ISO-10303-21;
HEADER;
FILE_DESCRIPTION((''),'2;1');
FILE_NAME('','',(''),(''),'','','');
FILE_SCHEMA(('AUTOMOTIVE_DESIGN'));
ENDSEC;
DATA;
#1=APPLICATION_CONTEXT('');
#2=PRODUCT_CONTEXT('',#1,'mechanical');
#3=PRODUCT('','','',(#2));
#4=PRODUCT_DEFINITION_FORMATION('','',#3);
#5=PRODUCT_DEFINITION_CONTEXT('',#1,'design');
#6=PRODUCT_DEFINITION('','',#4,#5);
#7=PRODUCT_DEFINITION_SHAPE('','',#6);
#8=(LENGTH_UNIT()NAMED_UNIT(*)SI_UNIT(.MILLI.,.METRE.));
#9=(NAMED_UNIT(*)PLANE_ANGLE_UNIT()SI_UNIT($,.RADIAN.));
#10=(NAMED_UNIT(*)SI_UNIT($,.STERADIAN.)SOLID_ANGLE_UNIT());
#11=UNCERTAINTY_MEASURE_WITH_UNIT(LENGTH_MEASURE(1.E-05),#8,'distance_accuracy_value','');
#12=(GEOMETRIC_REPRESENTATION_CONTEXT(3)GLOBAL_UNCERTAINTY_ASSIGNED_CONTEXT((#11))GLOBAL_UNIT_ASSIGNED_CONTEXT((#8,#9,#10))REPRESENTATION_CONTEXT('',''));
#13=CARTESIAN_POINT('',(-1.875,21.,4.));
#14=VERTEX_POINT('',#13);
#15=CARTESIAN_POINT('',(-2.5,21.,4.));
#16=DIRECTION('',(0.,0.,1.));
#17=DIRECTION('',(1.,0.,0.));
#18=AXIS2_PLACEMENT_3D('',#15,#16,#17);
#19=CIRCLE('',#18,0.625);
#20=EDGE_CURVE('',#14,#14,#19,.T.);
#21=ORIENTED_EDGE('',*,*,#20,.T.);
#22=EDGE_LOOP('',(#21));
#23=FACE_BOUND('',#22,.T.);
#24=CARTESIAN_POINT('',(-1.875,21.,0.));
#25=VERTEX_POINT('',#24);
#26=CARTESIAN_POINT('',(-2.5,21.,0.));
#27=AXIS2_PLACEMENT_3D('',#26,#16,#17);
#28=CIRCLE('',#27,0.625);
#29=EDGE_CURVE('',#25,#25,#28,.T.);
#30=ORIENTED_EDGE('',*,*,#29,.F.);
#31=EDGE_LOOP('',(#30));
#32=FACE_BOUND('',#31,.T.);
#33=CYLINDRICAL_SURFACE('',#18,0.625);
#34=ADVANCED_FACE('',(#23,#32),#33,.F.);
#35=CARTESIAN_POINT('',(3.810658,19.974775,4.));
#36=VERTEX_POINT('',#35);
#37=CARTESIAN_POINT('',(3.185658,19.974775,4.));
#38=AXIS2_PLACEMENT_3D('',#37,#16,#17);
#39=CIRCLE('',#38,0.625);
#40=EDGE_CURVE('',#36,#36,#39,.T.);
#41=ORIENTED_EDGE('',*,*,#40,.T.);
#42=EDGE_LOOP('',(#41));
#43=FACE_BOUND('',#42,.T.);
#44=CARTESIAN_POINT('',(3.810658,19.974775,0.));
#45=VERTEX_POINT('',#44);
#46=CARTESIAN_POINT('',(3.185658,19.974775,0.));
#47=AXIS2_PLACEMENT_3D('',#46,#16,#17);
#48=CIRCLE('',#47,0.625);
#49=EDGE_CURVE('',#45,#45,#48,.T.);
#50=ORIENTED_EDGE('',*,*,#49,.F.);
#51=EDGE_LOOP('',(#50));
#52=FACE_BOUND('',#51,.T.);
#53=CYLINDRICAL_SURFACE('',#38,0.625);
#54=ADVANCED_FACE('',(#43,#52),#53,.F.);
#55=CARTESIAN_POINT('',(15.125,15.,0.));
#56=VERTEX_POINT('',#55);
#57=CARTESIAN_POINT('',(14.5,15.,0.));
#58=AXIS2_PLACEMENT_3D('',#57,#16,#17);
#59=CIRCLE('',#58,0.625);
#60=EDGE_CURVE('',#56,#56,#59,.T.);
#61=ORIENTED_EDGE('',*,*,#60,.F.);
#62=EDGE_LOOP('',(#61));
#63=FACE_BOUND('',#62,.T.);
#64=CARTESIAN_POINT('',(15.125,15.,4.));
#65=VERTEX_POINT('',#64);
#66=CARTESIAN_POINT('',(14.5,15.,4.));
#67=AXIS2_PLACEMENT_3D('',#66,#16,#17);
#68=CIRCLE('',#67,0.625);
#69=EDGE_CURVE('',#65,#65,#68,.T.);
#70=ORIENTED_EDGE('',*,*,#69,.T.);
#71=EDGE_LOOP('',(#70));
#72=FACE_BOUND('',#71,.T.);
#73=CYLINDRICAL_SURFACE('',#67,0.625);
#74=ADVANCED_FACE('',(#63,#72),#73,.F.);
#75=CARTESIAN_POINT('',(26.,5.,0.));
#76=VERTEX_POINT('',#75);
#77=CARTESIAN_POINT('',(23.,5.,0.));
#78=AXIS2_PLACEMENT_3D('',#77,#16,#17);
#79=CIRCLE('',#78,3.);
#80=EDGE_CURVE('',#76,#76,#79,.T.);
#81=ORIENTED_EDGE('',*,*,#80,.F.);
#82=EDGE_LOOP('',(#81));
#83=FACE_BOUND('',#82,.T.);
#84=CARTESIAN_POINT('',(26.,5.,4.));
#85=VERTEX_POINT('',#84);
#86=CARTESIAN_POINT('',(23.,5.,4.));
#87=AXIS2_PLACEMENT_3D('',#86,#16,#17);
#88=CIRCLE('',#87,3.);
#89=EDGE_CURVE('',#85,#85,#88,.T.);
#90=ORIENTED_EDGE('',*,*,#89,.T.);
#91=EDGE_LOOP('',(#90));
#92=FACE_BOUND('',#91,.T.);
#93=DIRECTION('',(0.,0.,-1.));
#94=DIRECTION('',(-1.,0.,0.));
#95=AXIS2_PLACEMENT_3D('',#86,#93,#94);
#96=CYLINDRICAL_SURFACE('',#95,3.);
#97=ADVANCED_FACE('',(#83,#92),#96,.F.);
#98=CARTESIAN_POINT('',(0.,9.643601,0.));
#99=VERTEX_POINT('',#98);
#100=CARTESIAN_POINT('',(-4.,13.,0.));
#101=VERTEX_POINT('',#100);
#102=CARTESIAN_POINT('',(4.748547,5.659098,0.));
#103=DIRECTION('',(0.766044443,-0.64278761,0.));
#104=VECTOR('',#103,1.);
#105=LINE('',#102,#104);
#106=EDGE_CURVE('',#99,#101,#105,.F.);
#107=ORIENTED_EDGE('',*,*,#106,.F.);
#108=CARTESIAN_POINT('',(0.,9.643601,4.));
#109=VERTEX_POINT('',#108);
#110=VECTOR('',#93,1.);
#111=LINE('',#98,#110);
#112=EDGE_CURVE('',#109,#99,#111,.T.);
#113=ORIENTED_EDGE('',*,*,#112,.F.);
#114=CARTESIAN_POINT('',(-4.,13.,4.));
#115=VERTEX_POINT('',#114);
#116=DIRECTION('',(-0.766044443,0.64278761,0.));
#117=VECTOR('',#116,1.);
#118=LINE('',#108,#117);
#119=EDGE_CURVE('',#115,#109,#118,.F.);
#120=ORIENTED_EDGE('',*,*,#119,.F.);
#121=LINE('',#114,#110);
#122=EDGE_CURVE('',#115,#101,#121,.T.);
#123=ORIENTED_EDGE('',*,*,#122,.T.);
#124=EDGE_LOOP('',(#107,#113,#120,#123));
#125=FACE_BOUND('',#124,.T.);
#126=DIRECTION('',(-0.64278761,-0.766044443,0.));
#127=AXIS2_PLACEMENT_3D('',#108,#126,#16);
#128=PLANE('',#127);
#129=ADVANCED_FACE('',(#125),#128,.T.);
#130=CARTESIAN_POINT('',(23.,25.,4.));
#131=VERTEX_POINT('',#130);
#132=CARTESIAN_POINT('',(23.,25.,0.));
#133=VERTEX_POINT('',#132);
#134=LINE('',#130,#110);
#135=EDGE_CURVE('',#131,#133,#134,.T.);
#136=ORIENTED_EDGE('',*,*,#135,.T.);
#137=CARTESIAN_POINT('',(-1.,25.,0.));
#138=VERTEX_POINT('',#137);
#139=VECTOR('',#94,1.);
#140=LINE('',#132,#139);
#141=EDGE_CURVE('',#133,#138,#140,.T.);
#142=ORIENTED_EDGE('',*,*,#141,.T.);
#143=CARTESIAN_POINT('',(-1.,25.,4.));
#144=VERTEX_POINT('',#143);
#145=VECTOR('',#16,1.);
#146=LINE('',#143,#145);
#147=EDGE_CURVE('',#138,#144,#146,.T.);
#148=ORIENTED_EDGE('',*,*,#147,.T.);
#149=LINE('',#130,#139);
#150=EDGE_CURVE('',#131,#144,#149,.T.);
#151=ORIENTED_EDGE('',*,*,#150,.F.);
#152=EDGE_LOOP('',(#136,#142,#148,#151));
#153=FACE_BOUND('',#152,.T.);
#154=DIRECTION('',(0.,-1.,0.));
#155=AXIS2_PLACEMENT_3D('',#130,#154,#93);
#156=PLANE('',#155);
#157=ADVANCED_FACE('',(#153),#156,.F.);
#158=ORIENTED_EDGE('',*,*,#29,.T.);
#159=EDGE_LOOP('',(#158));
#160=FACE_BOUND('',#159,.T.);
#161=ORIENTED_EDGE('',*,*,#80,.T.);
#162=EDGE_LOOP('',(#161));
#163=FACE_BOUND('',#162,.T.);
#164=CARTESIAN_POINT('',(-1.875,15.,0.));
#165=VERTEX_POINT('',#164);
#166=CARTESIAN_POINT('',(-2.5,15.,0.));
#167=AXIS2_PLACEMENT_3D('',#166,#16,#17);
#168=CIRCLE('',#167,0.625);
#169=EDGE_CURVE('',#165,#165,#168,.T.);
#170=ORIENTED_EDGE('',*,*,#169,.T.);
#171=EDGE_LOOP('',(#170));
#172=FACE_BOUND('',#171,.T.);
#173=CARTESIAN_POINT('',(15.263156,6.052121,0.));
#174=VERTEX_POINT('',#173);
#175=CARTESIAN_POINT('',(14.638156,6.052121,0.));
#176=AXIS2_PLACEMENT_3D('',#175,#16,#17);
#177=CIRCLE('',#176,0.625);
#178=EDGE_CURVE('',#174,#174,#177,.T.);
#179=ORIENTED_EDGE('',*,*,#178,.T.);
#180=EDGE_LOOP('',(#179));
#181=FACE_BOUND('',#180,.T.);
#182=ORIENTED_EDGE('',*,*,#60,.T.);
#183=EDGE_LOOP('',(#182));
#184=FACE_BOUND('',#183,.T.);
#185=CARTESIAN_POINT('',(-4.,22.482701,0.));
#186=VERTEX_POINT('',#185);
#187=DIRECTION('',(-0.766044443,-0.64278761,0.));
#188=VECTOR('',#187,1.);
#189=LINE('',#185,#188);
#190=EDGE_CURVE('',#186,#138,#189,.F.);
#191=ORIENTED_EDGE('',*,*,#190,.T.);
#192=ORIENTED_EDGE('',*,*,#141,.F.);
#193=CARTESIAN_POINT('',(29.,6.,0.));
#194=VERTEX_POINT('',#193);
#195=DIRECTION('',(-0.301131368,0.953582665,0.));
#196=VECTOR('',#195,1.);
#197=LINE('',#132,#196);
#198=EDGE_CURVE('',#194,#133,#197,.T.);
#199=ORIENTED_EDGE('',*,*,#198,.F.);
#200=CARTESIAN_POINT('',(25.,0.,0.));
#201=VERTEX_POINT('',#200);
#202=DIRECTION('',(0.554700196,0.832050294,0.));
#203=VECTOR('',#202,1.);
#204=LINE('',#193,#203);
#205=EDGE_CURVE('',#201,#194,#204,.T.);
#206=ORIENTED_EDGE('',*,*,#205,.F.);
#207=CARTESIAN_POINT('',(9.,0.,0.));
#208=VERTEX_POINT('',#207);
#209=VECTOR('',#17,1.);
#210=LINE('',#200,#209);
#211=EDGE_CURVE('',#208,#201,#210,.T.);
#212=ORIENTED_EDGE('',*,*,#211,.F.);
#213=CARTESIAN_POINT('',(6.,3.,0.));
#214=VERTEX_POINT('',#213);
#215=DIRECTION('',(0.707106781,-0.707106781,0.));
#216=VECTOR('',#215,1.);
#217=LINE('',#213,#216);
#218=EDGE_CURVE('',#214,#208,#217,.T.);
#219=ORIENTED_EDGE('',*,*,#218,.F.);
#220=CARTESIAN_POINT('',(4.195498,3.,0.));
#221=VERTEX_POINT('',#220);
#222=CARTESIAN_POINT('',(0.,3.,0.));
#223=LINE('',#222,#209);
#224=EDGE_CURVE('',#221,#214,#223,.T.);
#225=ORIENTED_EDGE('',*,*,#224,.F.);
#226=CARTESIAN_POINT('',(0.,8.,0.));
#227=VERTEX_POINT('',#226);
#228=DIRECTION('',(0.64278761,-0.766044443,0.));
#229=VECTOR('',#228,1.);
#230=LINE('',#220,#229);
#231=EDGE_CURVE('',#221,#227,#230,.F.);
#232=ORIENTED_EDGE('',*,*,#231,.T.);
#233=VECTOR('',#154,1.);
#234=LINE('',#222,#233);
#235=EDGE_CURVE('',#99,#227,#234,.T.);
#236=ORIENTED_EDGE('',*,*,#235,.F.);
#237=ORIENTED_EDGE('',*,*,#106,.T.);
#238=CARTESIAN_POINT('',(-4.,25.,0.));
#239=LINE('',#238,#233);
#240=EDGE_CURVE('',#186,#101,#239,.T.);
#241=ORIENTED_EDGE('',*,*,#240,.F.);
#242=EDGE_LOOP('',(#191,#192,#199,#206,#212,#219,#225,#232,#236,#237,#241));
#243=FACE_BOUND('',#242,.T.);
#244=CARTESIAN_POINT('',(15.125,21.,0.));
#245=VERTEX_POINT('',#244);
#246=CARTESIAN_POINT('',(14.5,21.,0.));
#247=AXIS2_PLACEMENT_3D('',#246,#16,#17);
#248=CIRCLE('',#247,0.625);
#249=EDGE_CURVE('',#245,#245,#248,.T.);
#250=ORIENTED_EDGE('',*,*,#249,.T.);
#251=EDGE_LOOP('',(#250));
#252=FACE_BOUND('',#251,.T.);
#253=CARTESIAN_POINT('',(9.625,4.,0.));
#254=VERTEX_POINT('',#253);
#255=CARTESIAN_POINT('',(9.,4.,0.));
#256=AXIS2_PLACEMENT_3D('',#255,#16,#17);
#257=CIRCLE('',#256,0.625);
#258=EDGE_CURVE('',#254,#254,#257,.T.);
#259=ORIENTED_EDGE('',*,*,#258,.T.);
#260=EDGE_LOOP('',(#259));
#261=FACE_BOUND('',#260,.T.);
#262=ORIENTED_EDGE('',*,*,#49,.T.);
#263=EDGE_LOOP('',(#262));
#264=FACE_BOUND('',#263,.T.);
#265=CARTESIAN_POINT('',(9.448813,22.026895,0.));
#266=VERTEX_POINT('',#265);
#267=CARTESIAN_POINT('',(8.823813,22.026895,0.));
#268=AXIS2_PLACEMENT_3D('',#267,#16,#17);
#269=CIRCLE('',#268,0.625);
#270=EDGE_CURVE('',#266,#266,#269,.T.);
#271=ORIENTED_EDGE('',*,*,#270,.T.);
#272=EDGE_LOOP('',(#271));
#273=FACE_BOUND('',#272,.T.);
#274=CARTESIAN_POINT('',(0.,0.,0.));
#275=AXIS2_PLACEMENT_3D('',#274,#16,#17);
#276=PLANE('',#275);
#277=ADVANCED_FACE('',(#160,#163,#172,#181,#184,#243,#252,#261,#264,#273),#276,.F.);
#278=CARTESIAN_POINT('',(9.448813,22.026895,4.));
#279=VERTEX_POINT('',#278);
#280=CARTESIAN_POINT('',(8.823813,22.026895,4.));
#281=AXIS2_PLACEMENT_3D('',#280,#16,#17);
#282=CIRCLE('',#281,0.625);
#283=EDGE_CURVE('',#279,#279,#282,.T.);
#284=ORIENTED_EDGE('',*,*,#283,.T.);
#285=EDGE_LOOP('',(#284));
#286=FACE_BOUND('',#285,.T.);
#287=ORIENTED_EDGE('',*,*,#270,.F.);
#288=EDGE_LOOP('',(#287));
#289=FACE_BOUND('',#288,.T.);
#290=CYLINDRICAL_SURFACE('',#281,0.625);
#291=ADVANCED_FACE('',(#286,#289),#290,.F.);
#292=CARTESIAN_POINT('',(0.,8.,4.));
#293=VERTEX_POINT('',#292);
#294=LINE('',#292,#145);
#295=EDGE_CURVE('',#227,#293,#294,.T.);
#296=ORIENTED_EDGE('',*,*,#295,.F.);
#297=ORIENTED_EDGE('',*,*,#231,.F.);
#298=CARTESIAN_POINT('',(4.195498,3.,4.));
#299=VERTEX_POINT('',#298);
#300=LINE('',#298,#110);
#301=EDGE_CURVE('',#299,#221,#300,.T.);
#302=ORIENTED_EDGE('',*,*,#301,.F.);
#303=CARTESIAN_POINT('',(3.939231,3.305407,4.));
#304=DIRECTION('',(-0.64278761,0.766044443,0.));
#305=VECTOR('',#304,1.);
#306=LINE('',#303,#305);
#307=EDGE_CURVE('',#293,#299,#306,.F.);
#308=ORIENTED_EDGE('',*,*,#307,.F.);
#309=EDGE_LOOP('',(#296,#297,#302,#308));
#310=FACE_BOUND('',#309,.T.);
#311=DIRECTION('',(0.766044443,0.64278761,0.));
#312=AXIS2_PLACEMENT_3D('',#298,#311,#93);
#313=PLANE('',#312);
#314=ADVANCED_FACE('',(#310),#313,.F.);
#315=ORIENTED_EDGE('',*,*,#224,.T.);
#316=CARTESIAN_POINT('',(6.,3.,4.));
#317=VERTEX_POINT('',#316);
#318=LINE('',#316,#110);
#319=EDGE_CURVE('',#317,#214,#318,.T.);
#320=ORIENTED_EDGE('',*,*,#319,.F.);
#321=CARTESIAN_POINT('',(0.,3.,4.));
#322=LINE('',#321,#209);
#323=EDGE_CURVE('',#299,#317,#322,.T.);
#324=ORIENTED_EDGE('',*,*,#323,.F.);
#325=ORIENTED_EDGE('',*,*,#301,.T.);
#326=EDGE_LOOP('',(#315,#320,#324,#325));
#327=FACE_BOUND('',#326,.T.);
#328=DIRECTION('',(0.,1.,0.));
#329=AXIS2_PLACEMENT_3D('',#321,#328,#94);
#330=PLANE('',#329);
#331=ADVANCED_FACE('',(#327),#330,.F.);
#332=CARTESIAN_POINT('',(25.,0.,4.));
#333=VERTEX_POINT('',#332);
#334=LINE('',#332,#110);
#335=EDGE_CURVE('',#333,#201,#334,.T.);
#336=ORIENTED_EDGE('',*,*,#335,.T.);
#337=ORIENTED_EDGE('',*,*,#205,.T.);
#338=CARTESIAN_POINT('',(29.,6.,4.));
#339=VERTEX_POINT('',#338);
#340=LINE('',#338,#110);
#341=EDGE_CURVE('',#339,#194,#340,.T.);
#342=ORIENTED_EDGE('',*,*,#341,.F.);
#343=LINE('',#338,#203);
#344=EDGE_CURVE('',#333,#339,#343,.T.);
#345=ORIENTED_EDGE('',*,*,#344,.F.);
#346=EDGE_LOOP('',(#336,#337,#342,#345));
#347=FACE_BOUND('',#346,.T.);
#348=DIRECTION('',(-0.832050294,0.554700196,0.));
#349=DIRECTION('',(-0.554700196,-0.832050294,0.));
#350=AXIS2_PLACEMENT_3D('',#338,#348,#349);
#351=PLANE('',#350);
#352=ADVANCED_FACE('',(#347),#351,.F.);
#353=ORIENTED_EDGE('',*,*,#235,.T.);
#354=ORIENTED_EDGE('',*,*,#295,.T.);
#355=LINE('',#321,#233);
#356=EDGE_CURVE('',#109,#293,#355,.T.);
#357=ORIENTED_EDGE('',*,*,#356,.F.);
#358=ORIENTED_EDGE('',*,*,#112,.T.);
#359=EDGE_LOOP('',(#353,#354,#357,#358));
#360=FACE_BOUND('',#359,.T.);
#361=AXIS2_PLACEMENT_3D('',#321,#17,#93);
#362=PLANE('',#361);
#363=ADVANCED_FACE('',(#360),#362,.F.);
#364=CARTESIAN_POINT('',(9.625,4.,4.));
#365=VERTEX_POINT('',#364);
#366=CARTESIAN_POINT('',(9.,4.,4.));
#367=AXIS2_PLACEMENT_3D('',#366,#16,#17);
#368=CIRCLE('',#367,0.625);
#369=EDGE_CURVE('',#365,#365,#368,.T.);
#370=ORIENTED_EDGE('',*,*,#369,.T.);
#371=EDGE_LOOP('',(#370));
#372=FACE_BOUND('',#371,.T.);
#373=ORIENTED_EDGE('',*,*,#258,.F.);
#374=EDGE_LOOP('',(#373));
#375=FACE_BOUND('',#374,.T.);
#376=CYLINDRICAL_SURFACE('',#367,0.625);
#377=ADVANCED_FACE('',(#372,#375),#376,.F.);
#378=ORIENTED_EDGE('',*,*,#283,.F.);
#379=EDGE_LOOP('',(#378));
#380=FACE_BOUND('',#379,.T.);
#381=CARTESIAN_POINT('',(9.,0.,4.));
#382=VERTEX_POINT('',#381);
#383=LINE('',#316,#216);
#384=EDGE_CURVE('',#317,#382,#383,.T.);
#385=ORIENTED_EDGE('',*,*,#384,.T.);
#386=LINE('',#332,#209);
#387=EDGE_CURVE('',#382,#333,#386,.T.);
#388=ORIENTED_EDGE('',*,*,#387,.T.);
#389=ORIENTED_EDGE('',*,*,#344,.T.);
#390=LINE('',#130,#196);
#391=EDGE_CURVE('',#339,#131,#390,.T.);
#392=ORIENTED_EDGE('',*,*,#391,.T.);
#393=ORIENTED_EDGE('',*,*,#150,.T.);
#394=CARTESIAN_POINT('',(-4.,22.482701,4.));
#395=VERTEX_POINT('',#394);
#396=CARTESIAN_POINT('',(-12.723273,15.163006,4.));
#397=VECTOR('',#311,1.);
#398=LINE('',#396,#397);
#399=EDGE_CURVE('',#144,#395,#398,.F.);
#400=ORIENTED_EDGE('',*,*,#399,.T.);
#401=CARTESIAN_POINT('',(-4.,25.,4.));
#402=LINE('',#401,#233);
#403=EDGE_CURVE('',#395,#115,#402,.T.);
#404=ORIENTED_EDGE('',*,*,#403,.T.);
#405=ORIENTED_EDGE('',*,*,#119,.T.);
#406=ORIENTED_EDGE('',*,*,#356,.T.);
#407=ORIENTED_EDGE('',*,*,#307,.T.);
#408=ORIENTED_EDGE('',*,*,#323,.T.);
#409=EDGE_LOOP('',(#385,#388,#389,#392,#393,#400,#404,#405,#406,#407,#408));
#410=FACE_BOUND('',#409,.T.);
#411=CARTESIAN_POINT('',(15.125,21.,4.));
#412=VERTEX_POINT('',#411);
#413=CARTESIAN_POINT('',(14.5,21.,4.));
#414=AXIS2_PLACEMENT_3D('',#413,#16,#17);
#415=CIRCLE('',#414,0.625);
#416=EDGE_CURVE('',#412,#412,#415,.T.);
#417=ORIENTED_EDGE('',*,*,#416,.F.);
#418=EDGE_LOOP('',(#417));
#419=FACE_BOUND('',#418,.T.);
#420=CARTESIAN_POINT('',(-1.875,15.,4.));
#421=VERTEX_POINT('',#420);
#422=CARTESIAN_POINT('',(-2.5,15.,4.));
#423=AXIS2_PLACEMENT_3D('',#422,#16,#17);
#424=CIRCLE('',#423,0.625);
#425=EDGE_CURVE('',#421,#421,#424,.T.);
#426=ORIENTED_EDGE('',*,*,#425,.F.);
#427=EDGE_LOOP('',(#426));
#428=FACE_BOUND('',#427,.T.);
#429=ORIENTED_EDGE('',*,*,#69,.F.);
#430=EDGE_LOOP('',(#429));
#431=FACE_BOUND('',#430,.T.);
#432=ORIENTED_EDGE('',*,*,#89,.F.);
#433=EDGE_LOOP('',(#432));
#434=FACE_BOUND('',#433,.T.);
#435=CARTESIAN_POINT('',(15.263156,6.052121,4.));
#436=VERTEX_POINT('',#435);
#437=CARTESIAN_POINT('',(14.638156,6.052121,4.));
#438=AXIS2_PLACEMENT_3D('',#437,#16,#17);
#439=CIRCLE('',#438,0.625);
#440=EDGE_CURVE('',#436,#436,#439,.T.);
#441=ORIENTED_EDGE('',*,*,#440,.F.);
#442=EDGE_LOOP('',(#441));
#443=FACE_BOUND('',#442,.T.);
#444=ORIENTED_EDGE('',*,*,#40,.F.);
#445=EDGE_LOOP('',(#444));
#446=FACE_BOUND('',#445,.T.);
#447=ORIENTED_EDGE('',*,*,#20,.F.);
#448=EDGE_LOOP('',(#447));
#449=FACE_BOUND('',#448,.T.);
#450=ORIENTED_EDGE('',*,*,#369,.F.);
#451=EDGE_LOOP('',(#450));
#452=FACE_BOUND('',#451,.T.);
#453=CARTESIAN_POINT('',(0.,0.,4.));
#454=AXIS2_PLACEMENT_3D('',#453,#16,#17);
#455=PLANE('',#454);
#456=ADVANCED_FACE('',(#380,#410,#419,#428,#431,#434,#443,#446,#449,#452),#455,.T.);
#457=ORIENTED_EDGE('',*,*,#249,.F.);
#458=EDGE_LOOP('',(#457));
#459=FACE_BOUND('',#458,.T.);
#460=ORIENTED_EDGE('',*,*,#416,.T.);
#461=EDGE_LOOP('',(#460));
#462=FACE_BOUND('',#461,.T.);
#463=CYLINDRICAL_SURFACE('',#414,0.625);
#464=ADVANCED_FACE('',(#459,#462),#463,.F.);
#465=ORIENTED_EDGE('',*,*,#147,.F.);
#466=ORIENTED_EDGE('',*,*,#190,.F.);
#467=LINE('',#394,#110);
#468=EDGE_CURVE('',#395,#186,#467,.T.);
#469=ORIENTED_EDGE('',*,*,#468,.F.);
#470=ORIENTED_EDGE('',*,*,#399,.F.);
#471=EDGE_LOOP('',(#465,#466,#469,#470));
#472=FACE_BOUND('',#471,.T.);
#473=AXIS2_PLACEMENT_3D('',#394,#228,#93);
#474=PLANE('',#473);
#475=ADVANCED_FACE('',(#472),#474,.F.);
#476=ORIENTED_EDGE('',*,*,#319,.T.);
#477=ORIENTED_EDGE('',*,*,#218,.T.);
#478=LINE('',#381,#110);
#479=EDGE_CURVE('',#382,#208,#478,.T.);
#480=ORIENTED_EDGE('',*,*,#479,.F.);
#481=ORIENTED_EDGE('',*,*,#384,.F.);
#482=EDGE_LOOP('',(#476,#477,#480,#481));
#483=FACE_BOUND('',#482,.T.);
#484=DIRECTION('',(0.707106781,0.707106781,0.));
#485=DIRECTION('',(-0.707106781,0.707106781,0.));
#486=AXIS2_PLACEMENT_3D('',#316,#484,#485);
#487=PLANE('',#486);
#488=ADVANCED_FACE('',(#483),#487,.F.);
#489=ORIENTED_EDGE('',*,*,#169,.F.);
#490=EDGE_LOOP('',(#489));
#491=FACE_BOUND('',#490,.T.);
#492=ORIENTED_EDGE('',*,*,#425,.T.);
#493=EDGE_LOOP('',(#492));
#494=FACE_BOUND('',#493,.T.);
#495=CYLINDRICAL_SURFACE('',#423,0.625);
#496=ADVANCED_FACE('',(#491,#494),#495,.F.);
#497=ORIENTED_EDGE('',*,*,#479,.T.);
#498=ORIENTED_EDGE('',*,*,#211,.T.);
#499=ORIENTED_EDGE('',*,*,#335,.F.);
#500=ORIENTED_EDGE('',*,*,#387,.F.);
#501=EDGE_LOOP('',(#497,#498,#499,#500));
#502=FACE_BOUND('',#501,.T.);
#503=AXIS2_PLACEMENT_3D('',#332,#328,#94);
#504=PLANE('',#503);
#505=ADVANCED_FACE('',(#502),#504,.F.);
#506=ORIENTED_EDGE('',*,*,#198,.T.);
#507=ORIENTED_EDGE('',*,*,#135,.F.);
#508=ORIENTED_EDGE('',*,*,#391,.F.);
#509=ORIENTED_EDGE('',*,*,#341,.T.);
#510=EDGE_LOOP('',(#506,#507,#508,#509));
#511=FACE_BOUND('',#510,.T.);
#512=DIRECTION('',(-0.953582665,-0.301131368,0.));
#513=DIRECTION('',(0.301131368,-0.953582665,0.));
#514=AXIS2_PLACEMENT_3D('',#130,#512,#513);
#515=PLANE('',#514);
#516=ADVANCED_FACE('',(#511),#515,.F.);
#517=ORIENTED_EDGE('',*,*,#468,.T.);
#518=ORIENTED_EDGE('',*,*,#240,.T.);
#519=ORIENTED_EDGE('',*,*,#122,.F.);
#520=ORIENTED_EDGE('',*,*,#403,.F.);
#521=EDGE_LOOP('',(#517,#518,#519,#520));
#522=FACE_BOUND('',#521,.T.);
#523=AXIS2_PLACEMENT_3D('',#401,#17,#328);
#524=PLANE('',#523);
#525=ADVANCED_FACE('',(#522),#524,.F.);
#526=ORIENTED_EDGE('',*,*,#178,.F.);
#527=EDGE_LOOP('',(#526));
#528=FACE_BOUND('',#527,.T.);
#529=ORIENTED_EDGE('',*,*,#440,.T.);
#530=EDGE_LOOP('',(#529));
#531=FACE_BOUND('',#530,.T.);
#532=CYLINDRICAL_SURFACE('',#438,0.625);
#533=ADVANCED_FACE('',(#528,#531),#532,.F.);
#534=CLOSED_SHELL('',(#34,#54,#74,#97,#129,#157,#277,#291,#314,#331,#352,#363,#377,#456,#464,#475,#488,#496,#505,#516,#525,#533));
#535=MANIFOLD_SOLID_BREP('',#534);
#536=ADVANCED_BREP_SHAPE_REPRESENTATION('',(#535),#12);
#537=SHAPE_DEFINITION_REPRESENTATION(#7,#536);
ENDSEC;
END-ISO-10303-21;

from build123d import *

# Parameters (mm, degrees)
SKETCH_1_R               = 3
EXTRUDE_1_DEPTH          = 4
HOLE_WIZARD_M1_6_1_D     = 1.25
HOLE_WIZARD_M1_6_1_DEPTH = 4.95
HOLE_WIZARD_M1_6_1_TIP   = 0.375537887
HOLE_WIZARD_M1_6_2_D     = 1.25
HOLE_WIZARD_M1_6_2_DEPTH = 4.95
HOLE_WIZARD_M1_6_2_TIP   = 0.375537887
CHAMFER_1_SIZE           = 5
CHAMFER_1_SIZE2          = 4.195498156
CHAMFER_2_SIZE2          = 4
CHAMFER_2_SIZE           = 3.356398525
CHAMFER_4_SIZE           = 3
CHAMFER_4_SIZE2          = 2.517298894


with BuildPart() as part:
    # 草图1 → 凸台-拉伸1 (new body)
    with BuildSketch(Plane.XY):
        Polygon((0, 3), (0, 13), (-4, 13), (-4, 25), (23, 25), (29, 6), (25, 0), (9, 0), (6, 3), align=None)
        with Locations((23, 5)):
            Circle(SKETCH_1_R, mode=Mode.SUBTRACT)
    extrude(amount=EXTRUDE_1_DEPTH)

    # M1.6 螺纹孔1
    with Locations(Plane.XY.offset(4)):
        with Locations((-2.5, 21), (14.5, 21), (14.5, 15), (-2.5, 15)):
            Hole(HOLE_WIZARD_M1_6_1_D / 2, depth=HOLE_WIZARD_M1_6_1_DEPTH)
            with Locations((0, 0, -(HOLE_WIZARD_M1_6_1_DEPTH + HOLE_WIZARD_M1_6_1_TIP / 2))):  # 118° drill point
                Cone(0, HOLE_WIZARD_M1_6_1_D / 2, HOLE_WIZARD_M1_6_1_TIP, mode=Mode.SUBTRACT)

    # M1.6 螺纹孔2
    with Locations(Plane.XY.offset(4)):
        with Locations((8.823813288, 22.026895413), (14.638155725, 6.05212086), (9, 4), (3.185657563, 19.974774553)):
            Hole(HOLE_WIZARD_M1_6_2_D / 2, depth=HOLE_WIZARD_M1_6_2_DEPTH)
            with Locations((0, 0, -(HOLE_WIZARD_M1_6_2_DEPTH + HOLE_WIZARD_M1_6_2_TIP / 2))):  # 118° drill point
                Cone(0, HOLE_WIZARD_M1_6_2_D / 2, HOLE_WIZARD_M1_6_2_TIP, mode=Mode.SUBTRACT)

    # 倒角1
    chamfer_1_edges = [part.edges().sort_by_distance(p)[0] for p in [
        (0, 3, 2),
    ]]
    chamfer_1_side = [part.faces().sort_by_distance(p)[0] for p in [
        (0, 8, 2),
    ]]
    chamfer(chamfer_1_edges, length=CHAMFER_1_SIZE, length2=CHAMFER_1_SIZE2, reference=chamfer_1_side[0])

    # 倒角2
    chamfer_2_edges = [part.edges().sort_by_distance(p)[0] for p in [
        (0, 13, 2),
    ]]
    chamfer_2_side = [part.faces().sort_by_distance(p)[0] for p in [
        (0, 12.93287203, 2),
    ]]
    chamfer(chamfer_2_edges, length=CHAMFER_2_SIZE - 0.0001, length2=CHAMFER_2_SIZE2 - 0.0001, reference=chamfer_2_side[0])  # a hair under: the kernel refuses the full size

    # 倒角4
    chamfer_4_edges = [part.edges().sort_by_distance(p)[0] for p in [
        (-4, 25, 2),
    ]]
    chamfer_4_side = [part.faces().sort_by_distance(p)[0] for p in [
        (9.5, 25, 2),
    ]]
    chamfer(chamfer_4_edges, length=CHAMFER_4_SIZE, length2=CHAMFER_4_SIZE2, reference=chamfer_4_side[0])


solid = part.part
